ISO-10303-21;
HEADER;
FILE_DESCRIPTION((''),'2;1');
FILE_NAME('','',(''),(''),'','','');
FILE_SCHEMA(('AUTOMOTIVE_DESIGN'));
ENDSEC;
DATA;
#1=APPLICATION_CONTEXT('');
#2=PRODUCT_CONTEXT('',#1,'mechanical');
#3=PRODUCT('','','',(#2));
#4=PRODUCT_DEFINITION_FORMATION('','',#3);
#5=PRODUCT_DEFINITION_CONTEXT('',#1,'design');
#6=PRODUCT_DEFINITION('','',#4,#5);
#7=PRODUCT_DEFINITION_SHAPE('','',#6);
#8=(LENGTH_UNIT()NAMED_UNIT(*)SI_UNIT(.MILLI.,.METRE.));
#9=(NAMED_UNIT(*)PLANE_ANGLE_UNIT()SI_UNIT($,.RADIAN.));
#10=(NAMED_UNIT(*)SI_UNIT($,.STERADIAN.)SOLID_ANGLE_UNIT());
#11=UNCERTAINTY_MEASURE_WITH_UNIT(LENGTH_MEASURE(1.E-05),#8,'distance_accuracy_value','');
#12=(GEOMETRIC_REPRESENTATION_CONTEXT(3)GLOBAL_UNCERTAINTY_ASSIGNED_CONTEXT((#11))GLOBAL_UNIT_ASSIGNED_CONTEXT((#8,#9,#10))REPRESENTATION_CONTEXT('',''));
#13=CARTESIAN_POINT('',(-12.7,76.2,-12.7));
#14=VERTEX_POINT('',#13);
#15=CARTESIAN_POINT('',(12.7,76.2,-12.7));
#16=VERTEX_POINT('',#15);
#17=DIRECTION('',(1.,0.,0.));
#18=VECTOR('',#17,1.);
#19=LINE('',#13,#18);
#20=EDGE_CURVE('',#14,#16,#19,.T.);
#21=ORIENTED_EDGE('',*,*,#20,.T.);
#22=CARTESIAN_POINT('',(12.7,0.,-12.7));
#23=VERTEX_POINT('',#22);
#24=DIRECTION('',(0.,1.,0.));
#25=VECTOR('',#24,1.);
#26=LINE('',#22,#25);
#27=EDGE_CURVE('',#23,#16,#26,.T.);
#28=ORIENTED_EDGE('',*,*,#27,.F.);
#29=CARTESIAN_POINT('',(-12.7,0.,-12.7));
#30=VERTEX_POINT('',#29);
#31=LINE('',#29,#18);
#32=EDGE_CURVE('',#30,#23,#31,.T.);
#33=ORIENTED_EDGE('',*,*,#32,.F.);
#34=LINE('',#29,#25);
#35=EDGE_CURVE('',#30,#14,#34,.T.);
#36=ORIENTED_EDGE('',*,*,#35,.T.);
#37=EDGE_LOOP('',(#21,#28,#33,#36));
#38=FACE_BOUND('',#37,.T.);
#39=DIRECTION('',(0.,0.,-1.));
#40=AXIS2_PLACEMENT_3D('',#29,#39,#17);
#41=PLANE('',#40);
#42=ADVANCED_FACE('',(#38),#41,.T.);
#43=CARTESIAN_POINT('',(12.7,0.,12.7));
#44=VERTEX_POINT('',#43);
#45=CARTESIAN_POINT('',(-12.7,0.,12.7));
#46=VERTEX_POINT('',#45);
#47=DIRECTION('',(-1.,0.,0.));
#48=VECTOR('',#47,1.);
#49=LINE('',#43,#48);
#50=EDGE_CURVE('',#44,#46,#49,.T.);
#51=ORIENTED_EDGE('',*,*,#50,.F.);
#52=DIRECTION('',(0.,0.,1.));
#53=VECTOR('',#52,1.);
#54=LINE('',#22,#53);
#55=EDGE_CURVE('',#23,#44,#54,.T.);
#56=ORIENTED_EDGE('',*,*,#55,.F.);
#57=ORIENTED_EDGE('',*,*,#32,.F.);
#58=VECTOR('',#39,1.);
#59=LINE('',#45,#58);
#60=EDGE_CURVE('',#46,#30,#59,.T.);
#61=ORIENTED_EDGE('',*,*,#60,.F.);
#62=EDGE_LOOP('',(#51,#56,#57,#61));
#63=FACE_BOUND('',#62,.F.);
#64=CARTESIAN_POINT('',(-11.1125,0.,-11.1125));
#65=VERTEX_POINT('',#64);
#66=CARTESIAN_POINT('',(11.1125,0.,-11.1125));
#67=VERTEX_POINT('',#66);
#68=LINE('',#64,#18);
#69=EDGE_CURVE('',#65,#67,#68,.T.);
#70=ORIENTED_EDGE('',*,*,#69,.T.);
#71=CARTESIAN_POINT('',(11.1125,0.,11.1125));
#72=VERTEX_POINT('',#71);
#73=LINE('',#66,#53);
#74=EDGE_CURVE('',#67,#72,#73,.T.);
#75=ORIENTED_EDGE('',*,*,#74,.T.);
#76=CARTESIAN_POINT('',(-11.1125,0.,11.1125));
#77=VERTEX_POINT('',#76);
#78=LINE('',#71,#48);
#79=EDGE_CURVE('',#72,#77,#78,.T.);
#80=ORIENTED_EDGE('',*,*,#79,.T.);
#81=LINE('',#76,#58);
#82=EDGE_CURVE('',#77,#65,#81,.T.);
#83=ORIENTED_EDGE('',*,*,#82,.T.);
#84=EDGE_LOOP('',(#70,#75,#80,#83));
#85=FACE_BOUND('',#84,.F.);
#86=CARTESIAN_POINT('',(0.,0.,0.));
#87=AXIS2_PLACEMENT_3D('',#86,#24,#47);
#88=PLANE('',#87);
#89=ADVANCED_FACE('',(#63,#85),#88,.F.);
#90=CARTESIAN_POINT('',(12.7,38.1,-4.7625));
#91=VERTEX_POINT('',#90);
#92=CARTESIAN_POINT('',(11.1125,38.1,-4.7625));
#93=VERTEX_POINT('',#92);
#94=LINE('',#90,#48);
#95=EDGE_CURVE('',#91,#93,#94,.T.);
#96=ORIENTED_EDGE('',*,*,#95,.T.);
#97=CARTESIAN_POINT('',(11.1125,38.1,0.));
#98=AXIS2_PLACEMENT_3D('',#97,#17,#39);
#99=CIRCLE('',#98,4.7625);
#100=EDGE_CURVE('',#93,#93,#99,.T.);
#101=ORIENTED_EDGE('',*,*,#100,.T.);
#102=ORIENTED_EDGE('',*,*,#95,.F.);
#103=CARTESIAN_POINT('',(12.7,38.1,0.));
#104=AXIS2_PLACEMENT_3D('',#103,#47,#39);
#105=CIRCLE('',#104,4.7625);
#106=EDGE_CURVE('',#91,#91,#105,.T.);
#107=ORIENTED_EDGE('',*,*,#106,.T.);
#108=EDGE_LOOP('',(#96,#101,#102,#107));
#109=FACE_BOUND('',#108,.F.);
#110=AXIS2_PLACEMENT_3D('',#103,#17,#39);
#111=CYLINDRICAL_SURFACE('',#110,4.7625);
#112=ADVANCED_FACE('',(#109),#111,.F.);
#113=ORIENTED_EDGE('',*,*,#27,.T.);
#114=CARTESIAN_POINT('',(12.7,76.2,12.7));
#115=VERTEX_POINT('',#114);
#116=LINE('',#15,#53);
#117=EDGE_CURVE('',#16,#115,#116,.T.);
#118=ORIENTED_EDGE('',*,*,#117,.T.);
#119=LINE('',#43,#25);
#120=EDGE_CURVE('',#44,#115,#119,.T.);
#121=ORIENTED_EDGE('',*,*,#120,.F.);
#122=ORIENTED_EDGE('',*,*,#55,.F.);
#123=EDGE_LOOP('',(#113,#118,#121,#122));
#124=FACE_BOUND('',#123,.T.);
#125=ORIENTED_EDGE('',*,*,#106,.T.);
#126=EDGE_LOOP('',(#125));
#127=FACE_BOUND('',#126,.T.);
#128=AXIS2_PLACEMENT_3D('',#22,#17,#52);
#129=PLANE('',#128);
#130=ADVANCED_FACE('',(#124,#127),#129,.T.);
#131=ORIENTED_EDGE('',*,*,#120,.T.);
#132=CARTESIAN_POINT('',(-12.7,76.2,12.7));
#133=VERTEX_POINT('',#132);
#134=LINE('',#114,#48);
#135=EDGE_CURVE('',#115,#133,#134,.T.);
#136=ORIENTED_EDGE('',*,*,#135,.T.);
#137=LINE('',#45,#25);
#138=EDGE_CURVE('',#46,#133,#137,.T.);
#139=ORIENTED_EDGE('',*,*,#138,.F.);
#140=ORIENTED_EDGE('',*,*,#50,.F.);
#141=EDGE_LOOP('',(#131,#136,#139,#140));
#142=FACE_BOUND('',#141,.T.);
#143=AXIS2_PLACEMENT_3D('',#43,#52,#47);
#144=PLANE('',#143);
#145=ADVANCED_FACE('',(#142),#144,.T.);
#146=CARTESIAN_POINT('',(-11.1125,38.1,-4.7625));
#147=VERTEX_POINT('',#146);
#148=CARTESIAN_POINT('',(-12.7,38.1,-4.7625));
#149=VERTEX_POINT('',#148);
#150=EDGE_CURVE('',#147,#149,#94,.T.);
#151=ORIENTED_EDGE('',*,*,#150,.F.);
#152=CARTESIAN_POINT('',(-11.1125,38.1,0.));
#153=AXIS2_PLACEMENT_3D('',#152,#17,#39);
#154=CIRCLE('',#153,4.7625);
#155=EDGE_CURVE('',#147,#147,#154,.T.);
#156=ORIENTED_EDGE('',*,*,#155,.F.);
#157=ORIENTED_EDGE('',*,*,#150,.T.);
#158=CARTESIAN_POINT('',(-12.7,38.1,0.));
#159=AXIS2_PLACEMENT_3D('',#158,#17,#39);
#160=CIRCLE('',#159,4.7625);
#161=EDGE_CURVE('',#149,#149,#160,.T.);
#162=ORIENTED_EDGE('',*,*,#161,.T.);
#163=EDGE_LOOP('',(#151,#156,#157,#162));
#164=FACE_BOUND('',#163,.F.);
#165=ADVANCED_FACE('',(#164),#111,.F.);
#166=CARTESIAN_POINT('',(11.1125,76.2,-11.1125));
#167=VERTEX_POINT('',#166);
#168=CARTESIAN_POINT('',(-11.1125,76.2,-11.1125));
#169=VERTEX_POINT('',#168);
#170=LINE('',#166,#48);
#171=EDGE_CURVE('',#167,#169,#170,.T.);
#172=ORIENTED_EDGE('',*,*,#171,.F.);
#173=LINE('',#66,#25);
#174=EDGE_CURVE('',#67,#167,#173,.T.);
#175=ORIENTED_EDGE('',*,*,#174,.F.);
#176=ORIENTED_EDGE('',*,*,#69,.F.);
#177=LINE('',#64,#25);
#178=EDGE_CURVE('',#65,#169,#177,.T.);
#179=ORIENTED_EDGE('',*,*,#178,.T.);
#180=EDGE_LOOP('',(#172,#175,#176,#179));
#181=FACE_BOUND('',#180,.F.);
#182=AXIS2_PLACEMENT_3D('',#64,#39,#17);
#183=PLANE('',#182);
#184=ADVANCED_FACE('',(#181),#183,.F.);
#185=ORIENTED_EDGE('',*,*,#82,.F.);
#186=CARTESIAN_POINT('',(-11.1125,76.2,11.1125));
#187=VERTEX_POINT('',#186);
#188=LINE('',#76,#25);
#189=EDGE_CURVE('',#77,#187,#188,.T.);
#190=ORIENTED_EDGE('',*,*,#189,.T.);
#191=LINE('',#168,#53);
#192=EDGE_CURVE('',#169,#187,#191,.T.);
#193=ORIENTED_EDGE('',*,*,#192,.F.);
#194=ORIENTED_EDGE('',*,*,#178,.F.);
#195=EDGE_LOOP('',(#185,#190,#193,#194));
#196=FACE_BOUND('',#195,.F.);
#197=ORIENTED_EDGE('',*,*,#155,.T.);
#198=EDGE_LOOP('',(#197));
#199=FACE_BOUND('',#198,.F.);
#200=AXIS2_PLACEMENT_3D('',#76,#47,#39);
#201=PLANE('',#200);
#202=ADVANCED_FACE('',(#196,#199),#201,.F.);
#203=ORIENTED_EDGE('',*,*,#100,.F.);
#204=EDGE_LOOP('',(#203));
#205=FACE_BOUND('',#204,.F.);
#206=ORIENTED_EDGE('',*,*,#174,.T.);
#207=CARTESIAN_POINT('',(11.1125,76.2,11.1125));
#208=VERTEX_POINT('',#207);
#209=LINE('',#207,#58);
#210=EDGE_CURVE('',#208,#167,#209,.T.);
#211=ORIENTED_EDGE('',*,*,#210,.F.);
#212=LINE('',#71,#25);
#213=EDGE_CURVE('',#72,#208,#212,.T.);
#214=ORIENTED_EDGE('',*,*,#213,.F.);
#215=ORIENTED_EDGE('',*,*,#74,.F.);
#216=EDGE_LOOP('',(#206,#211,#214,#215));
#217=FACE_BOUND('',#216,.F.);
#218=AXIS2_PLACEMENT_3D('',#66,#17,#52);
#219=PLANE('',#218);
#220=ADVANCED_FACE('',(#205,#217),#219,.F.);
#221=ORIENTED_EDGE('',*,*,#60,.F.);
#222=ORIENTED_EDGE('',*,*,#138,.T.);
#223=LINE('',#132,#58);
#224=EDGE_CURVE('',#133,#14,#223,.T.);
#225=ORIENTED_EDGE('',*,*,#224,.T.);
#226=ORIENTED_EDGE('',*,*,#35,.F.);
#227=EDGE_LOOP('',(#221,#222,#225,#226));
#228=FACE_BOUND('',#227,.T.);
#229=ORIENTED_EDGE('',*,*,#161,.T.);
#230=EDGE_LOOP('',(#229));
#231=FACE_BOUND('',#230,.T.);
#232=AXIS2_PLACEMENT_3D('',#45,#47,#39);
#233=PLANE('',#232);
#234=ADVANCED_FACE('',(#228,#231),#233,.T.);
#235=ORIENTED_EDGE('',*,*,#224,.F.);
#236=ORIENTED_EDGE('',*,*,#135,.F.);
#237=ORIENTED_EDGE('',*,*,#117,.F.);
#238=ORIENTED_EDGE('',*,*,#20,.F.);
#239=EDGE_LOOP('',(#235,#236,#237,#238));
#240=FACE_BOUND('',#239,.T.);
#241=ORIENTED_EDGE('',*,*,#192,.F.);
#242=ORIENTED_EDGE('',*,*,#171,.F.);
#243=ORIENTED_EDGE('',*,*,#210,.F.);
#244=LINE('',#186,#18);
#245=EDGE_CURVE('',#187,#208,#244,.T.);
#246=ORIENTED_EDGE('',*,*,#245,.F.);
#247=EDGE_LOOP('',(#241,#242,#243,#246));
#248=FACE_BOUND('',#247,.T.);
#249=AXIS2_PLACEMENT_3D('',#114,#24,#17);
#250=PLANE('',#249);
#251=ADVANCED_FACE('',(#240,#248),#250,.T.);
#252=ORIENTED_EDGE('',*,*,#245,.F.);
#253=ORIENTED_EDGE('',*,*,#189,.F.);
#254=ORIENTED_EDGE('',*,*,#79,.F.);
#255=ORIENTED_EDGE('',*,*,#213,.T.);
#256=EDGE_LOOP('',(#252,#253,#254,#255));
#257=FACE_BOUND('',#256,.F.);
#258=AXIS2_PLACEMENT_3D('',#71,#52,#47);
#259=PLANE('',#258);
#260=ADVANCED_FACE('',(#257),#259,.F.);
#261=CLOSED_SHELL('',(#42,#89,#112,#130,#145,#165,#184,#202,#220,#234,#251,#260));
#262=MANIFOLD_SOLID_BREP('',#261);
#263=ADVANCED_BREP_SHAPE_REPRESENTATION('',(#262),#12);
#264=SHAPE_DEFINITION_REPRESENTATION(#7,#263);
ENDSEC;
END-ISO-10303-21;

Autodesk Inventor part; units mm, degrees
ref_plane "YZ Plane" through (0, 0, 0) normal (1, 0, 0) x (0, 1, 0)
ref_plane "XZ Plane" through (0, 0, 0) normal (0, 1, 0) x (-1, 0, 0)
ref_plane "XY Plane" through (0, 0, 0) normal (0, 0, 1) x (1, 0, 0)
sketch "Sketch1" plane through (0, 0, 0) normal (0, 1, 0) x (-1, 0, 0)
  line L0 (12.7, 12.7) -> (12.7, -12.7)
  line L1 (12.7, -12.7) -> (-12.7, -12.7)
  line L2 (-12.7, -12.7) -> (-12.7, 12.7)
  line L3 (-12.7, 12.7) -> (12.7, 12.7)
  line L4 (12.7, 12.7) -> (-12.7, -12.7) construction
  line L5 (12.7, -12.7) -> (-12.7, 12.7) construction
  line L6 (11.1125, 11.1125) -> (11.1125, -11.1125)
  line L7 (11.1125, -11.1125) -> (-11.1125, -11.1125)
  line L8 (-11.1125, -11.1125) -> (-11.1125, 11.1125)
  line L9 (-11.1125, 11.1125) -> (11.1125, 11.1125)
  line L10 (11.1125, 11.1125) -> (-11.1125, -11.1125) construction
  line L11 (11.1125, -11.1125) -> (-11.1125, 11.1125) construction
  point P0 (0, 0)
  dimension "d0" = 25.4
  dimension "d1" = 25.4
  dimension "d2" = 1.5875
  dimension "d3" = 1.5875
extrude "Extrusion1" add sketch "Sketch1" along normal blind 660.4
sketch "Sketch2" plane through (12.7, 0, 12.7) normal (1, 0, 0) x (0, 0, -1)
  line L0 (12.7, 0) -> (12.7, 38.1)
  circle A0 centre (12.7, 38.1) radius 4.7625
  line L1 (3.9688, 38.1) -> (8.3344, 45.6615)
  line L2 (8.3344, 45.6615) -> (17.0656, 45.6615)
  line L3 (17.0656, 45.6615) -> (21.4313, 38.1)
  line L4 (21.4313, 38.1) -> (17.0656, 30.5385)
  line L5 (17.0656, 30.5385) -> (8.3344, 30.5385)
  line L6 (8.3344, 30.5385) -> (3.9688, 38.1)
  dimension "d6" = 38.1
  dimension "d7" = 9.525
  dimension "d8" = 8.7312
extrude "Extrusion2" cut sketch "Sketch2" against normal blind 46.6 contours A0
sketch "Sketch3" plane through (12.7, 0, 12.7) normal (1, 0, 0) x (0, 0, -1)
  line L0 (12.7, 0) -> (12.7, 177.8)
  line L1 (0, 0) -> (0, 660.4) projected
  line L2 (0, 177.8) -> (180.4268, 177.8)
  line L3 (180.4268, 177.8) -> (180.4268, 742.2297)
  line L4 (180.4268, 742.2297) -> (0, 742.2297)
  line L5 (0, 742.2297) -> (0, 177.8)
  dimension "d11" = 177.8
extrude "Extrusion3" cut sketch "Sketch3" against normal blind 354.85
sketch "Sketch4" plane through (12.7, 0, 12.7) normal (1, 0, 0) x (0, 0, -1)
  point P0 (12.7, 0)
sketch "Sketch5" plane through (12.7, 0, 12.7) normal (1, 0, 0) x (0, 0, -1)
  line L0 (12.7, 0) -> (12.7, 114.3)
  line L1 (12.7, 114.3) -> (91.9102, 114.3)
  line L2 (91.9102, 114.3) -> (43.6603, 200.7395)
  line L3 (43.6603, 200.7395) -> (-39.5707, 207.1728)
  line L4 (-39.5707, 207.1728) -> (-50.6279, 117.9106)
  line L5 (-50.6279, 117.9106) -> (-45.0993, 114.3)
  line L6 (-45.0993, 114.3) -> (12.7, 114.3)
  dimension "d14" = 114.3
extrude "Extrusion4" cut sketch "Sketch5" against normal blind 40.85
sketch "Sketch6" plane through (12.7, 114.3, 12.7) normal (0, 1, 0) x (1, 0, 0)
  line L0 (0, 0) -> (-25.4, 0) projected
  line L1 (0, 25.4) -> (0, 0) projected
  line L2 (-25.4, 25.4) -> (0, 25.4) projected
  line L3 (-25.4, 0) -> (-25.4, 25.4) projected
  line L4 (-1.5875, 23.8125) -> (-23.8125, 23.8125) projected
  line L5 (-1.5875, 1.5875) -> (-1.5875, 23.8125) projected
  line L6 (-23.8125, 1.5875) -> (-1.5875, 1.5875) projected
  line L7 (-23.8125, 23.8125) -> (-23.8125, 1.5875) projected
  point P0 (-12.7, 12.7)
extrude "Extrusion5" cut sketch "Sketch6" against normal blind 38.1
properties part number "Tube End" material "Aluminum 6061"
